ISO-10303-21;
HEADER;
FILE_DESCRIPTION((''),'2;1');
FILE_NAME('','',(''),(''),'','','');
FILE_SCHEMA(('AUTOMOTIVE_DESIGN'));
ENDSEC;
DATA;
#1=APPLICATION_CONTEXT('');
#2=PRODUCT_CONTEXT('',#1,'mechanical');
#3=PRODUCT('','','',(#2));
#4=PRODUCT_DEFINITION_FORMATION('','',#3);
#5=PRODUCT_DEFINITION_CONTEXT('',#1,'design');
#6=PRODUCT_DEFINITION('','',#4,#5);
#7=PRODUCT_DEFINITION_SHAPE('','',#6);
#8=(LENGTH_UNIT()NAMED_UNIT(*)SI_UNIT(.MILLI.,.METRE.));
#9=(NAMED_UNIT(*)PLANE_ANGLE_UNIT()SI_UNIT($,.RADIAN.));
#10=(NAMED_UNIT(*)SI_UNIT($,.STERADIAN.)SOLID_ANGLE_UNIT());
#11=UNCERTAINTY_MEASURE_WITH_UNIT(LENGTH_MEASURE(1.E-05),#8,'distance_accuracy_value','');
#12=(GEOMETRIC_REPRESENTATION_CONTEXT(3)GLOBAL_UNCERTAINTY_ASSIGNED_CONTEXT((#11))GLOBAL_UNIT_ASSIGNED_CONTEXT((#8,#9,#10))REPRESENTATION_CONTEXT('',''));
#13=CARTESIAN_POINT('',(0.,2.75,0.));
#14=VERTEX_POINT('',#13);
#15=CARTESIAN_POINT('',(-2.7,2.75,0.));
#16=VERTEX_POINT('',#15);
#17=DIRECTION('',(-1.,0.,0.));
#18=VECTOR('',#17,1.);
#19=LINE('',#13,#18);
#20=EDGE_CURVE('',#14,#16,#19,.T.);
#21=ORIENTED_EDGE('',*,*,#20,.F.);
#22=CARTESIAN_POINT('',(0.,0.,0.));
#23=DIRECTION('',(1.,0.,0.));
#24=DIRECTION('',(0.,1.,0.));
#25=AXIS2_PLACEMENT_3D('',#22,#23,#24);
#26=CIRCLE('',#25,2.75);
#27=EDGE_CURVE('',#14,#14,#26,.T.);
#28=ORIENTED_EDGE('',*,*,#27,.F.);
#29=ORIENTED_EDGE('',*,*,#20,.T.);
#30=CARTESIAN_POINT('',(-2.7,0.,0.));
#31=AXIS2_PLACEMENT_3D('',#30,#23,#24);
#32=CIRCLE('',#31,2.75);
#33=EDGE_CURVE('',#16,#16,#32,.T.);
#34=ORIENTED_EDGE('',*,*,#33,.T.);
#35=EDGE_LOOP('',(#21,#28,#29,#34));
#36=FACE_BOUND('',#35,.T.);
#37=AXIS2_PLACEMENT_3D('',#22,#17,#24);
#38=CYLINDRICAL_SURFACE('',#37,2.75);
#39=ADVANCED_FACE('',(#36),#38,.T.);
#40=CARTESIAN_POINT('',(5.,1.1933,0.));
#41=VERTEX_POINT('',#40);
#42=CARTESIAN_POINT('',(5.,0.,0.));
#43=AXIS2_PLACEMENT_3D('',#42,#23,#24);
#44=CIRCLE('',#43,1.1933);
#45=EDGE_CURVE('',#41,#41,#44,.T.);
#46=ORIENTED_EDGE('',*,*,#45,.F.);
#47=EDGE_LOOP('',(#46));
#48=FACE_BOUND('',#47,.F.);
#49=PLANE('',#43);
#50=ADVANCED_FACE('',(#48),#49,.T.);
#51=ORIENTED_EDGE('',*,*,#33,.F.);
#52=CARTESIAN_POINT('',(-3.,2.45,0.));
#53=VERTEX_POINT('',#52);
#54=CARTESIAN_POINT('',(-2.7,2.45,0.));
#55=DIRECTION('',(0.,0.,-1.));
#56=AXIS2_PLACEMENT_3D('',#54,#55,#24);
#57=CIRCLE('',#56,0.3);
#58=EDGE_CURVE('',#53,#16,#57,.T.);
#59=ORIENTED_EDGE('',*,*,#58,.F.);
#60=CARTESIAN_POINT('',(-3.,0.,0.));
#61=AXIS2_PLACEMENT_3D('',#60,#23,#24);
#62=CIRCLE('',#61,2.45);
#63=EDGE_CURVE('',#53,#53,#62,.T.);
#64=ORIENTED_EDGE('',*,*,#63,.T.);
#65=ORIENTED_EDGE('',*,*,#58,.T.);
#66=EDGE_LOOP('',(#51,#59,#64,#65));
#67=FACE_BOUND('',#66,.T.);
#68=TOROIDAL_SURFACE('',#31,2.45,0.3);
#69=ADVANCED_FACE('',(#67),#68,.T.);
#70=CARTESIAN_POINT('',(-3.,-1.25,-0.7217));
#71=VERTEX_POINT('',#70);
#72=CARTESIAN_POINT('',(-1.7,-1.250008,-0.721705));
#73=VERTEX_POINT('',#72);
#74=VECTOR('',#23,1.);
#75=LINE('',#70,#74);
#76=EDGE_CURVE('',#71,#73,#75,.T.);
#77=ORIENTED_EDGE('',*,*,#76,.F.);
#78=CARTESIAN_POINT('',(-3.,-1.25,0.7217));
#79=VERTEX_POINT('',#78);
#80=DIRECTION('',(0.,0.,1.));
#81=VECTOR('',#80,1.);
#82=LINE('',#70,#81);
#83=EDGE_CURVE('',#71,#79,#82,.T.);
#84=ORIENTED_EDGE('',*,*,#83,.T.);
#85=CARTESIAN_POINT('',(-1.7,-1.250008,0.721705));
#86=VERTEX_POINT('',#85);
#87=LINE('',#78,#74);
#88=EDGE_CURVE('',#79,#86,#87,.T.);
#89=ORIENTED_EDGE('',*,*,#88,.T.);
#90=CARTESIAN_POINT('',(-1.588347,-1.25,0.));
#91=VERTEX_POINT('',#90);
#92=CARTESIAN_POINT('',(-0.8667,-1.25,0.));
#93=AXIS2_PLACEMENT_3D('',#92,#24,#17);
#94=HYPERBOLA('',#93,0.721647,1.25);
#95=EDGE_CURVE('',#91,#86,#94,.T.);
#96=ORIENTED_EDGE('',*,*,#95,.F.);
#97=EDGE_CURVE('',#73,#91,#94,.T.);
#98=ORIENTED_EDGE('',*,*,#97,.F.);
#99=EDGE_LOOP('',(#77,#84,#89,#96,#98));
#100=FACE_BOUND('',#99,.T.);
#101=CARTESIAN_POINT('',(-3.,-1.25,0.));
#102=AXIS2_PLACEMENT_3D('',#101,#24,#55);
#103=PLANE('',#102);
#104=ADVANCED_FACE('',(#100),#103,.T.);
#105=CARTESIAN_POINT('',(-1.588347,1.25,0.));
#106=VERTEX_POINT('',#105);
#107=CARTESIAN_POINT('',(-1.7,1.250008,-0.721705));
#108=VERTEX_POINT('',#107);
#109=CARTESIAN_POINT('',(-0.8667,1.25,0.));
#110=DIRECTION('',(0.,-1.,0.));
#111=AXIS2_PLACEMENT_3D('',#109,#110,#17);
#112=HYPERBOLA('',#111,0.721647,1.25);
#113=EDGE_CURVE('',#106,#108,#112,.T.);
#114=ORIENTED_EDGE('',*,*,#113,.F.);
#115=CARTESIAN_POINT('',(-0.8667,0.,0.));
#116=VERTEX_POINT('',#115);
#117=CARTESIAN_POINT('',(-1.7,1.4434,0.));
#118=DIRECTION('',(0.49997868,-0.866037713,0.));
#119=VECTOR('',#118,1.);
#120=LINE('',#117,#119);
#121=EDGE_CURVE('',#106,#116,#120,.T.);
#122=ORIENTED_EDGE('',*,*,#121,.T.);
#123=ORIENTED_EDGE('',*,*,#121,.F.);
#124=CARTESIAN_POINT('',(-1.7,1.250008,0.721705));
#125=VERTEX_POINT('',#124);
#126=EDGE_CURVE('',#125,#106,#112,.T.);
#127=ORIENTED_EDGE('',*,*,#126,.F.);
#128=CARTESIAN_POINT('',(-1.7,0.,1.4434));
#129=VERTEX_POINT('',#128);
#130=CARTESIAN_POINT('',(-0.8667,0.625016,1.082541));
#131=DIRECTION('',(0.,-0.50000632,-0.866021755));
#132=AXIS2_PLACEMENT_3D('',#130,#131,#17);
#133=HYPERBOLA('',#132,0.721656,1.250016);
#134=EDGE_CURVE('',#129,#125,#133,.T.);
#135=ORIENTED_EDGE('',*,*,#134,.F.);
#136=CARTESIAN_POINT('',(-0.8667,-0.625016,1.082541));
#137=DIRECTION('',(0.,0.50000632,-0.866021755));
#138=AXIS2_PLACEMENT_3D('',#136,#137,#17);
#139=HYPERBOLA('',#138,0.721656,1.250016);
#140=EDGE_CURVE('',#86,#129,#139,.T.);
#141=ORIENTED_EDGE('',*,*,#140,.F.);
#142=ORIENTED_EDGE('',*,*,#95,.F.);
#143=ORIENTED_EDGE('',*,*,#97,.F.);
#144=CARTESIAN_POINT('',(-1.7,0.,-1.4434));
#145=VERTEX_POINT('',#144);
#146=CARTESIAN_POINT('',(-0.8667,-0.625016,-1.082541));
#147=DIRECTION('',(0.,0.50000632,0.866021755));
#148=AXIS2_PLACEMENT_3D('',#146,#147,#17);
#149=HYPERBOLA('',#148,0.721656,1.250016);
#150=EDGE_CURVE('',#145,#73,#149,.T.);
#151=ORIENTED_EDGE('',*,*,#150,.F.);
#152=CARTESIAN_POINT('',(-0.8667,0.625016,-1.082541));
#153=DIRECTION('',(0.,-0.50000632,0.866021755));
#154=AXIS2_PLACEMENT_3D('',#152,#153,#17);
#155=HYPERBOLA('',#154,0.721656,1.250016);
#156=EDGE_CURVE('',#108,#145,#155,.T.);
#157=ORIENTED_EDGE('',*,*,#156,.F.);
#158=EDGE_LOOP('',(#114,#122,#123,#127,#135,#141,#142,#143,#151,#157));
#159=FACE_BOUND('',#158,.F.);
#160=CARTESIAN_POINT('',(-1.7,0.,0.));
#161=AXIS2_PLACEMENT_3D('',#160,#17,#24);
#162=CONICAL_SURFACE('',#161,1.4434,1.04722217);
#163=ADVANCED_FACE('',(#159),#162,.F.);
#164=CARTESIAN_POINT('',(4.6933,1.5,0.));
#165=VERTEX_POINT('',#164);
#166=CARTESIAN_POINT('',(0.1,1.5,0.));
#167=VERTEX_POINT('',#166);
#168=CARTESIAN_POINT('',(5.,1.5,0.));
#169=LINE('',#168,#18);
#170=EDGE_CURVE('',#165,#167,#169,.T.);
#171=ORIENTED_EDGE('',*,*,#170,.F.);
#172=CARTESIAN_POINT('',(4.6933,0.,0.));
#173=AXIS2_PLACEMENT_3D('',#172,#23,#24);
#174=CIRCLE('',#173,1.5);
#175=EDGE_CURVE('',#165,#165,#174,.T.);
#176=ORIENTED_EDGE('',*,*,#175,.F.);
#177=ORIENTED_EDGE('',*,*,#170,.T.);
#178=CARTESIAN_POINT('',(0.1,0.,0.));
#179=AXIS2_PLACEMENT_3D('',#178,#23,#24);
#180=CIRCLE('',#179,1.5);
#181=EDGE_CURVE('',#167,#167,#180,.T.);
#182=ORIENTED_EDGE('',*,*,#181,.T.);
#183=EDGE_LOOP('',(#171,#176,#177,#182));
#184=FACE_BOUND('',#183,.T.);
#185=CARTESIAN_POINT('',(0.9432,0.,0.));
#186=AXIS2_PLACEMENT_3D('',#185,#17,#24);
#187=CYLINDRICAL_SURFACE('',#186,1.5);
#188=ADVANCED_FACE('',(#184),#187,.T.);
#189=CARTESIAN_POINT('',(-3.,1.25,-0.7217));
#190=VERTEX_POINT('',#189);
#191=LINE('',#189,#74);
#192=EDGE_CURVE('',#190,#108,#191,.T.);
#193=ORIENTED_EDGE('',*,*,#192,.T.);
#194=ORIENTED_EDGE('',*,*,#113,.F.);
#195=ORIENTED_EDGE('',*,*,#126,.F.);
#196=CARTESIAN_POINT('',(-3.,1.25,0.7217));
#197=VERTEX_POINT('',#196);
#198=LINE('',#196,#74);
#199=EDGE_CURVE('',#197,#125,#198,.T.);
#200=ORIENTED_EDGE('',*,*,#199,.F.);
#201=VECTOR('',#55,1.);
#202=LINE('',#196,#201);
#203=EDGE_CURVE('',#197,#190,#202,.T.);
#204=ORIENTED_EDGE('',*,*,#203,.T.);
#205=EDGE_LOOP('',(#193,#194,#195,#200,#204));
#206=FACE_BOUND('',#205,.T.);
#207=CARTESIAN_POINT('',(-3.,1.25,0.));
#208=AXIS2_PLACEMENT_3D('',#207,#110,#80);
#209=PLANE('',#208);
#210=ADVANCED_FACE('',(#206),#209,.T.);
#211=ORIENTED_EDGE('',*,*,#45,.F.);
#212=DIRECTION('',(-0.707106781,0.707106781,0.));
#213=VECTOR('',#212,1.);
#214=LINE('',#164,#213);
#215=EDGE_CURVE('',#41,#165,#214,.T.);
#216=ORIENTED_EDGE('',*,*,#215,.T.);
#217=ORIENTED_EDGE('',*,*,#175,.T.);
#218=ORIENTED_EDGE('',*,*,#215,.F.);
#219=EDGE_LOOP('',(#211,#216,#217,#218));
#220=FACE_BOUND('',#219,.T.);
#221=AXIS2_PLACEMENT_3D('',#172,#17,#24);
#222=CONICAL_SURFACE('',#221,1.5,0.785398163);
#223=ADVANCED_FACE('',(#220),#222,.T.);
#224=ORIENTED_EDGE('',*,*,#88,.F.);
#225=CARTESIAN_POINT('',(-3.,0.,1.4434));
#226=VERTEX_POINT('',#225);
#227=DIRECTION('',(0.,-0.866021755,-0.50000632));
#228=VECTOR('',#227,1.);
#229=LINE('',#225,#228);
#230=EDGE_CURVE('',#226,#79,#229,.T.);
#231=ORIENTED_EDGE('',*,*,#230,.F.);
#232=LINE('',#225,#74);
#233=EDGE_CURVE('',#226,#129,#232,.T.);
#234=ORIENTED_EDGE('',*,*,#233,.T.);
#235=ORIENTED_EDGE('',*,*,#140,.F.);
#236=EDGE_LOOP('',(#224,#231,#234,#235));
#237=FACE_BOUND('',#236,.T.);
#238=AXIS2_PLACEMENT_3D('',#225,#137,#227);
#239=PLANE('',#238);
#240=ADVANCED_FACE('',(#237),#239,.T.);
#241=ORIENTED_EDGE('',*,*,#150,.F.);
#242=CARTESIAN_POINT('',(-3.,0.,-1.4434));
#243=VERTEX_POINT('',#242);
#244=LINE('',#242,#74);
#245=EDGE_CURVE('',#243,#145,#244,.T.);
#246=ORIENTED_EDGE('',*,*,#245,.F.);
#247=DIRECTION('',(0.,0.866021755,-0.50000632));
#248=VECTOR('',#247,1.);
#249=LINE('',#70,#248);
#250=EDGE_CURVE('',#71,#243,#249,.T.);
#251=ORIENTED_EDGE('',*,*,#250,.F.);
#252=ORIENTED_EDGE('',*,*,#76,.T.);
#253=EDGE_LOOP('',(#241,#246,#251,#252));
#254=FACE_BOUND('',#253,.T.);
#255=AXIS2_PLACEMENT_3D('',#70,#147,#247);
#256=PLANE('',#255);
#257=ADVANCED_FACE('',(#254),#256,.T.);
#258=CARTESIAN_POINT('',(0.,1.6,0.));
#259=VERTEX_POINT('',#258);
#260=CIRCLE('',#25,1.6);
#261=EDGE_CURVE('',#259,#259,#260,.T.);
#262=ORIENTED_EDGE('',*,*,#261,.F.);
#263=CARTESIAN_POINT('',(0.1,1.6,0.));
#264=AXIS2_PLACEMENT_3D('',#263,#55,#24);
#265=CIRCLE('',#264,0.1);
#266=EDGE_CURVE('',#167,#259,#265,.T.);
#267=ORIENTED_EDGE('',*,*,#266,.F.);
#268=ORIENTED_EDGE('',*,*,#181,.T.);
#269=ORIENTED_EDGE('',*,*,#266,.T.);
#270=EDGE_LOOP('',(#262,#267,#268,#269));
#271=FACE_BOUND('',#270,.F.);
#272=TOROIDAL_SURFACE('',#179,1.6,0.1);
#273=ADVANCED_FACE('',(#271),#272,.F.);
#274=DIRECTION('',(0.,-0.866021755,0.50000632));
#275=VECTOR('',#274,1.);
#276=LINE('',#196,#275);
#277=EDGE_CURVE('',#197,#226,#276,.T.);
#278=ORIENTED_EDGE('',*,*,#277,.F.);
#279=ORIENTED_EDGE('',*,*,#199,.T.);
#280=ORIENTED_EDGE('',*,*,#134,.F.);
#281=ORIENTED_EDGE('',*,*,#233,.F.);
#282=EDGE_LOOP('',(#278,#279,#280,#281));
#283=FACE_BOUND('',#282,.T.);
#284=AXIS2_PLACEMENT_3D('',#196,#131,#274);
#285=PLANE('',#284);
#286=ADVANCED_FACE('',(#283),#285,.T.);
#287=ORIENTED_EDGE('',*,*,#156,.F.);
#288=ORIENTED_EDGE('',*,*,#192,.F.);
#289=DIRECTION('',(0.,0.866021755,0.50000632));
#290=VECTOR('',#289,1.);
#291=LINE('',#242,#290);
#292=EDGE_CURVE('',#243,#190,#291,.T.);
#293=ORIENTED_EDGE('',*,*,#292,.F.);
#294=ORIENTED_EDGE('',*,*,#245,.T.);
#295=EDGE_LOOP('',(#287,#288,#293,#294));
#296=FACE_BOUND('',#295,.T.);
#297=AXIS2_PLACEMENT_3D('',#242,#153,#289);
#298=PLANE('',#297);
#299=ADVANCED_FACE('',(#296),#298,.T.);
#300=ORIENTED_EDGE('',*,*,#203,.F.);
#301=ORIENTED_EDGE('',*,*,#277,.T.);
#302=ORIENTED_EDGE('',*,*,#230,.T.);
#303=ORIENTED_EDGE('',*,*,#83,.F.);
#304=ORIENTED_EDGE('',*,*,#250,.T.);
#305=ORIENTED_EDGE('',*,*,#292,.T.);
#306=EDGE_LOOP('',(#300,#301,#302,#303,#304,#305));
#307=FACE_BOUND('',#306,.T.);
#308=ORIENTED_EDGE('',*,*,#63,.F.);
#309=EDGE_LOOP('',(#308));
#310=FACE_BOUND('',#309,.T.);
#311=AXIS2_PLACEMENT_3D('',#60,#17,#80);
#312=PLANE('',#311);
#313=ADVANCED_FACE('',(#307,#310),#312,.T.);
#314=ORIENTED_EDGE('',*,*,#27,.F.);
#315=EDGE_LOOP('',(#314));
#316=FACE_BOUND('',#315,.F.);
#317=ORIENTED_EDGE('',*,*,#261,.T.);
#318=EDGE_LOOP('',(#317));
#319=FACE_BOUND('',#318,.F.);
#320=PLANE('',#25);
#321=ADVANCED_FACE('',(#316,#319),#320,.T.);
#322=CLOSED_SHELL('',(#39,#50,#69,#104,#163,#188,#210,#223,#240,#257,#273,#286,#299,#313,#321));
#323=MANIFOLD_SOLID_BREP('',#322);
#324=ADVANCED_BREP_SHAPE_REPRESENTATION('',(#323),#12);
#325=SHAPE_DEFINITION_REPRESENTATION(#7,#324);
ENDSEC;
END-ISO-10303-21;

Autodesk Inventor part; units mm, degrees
ref_plane "YZ Plane" through (0, 0, 0) normal (1, 0, 0) x (0, 1, 0)
ref_plane "XZ Plane" through (0, 0, 0) normal (0, 1, 0) x (-1, 0, 0)
sketch "Skizze1" plane through (0, 0, 0) normal (0, 0, 1) x (1, 0, 0)
  line L0 (-0.8667, 0) -> (5, 0)
  line L1 (5, 0) -> (5, 1.5)
  line L2 (5, 1.5) -> (1.25, 1.5)
  line L3 (1.25, 1.5) -> (0.9432, 1.5)
  line L4 (0.9432, 1.5) -> (0, 1.5)
  line L5 (0, 1.5) -> (0, 2.75)
  line L6 (0, 2.75) -> (-3, 2.75)
  line L7 (-3, 2.75) -> (-3, 1.4434)
  line L8 (-3, 1.4434) -> (-1.7, 1.4434)
  line L9 (-1.7, 1.4434) -> (-0.8667, 0)
  line L10 (-4.6, 0) -> (6.6, 0) projected
  line L11 (0, -0.55) -> (0, 3.3) projected
  line L12 (1.25, 1.5) -> (0, 1.5) construction
  dimension "d1" = 3.75
  dimension "d2" = 0.3068
  dimension "d3" = 3
  dimension "d4" = 1.3
  dimension "d5" = 60
  dimension "d6" = 3
  dimension "d7" = 3
  dimension "d8" = 2.8868
  dimension "d9" = 5.5
  dimension "d26" = 5
revolve "Körper" add sketch "Skizze1" angle 360 about axis through (-0.8667, 0, 0) along (1, 0, 0)
sketch "Skizze2" plane through (-3, 0, 0) normal (-1, 0, 0) x (0, 0, 1)
  circle A0 centre (0, 0) radius 1.4434 projected
  line L0 (0, -3.85) -> (0, 3.85) projected
  line L1 (-3.85, 0) -> (3.85, 0) projected
  line L2 (1.4434, 0) -> (0.7217, -1.25)
  line L3 (0.7217, -1.25) -> (-0.7217, -1.25)
  line L4 (-0.7217, -1.25) -> (-1.4434, 0)
  line L5 (-1.4434, 0) -> (-0.7217, 1.25)
  line L6 (-0.7217, 1.25) -> (0.7217, 1.25)
  line L7 (0.7217, 1.25) -> (1.4434, 0)
extrude "Loch" add sketch "Skizze2" against normal up to next contours L7 A0 | A0 L2 | L6 L0 A0 | A0 L0 L3 | L0 L6 A0 | A0 L3 L0 | L4 A0 | A0 L5
fillet "Rundung1" radius 0.3 1 edges at (-3, -2.75, 0)
thread "Gewinde" size "M3x0.5" class "6g" standard "ISO Metric profile" length 3.75
chamfer "Fase1" distance 0.3067 distance2 0.3067 1 edges at (5, -1.5, 0) measured on face at (5, -0.2617, -0.7882)
ref_plane "Work Plane1" through (29, 0, 0) normal (0, -1, 0) x (1, 0, 0)
fillet "Fillet2" radius 0.1 1 edges at (0, -1.5, 0)
equation "\"d1\" = GEL"
equation "\"d3\" = KOH"
equation "\"d4\" = INTI"
equation "\"d6\" = GD"
equation "\"d7\" = BDM"
equation "\"d8\" = 1.1547 * SW"
equation "\"d9\" = KOD"
equation "\"d26\" = NLG"
equation "\"d30\" = R"
equation "\"d17\" = RR"
equation "\"d13\" = GEL"
equation "\"d15\" = -0.5 * SPD + 0.5 * GD"
equation "\"d16\" = GUL"
equation "\"GD\" = NND"
equation "\"NLG\" = 5"
equation "\"GEL\" = 3.75"
equation "\"KOD\" = 5.5"
equation "\"KOH\" = 3"
equation "\"INTI\" = 1.3"
equation "\"GAL\" = 0.61345 * PTC"
equation "\"GUL\" = 0.61345 * PTC"
equation "\"BDM\" = NND"
equation "\"SW\" = 2.5"
equation "\"RR\" = 0.3"
equation "\"SPD\" = NND - 1.2269 * PTC"
equation "\"R\" = 0.1"
equation "\"TOA\" = 30deg"
equation "\"GD1\" = THREADDIA - 1.2269 * PTC"
equation "\"THREADDIA\" = 3"
equation "\"FAWI\" = 45deg"
equation "\"ANG\" = 120deg"
equation "\"PTC\" = 0.5"
equation "\"NND\" = 3"
equation "\"E0\" = 1.155 * SW"
properties part number "DIN 912 - M3 x 5" material "Stahl, weich"
